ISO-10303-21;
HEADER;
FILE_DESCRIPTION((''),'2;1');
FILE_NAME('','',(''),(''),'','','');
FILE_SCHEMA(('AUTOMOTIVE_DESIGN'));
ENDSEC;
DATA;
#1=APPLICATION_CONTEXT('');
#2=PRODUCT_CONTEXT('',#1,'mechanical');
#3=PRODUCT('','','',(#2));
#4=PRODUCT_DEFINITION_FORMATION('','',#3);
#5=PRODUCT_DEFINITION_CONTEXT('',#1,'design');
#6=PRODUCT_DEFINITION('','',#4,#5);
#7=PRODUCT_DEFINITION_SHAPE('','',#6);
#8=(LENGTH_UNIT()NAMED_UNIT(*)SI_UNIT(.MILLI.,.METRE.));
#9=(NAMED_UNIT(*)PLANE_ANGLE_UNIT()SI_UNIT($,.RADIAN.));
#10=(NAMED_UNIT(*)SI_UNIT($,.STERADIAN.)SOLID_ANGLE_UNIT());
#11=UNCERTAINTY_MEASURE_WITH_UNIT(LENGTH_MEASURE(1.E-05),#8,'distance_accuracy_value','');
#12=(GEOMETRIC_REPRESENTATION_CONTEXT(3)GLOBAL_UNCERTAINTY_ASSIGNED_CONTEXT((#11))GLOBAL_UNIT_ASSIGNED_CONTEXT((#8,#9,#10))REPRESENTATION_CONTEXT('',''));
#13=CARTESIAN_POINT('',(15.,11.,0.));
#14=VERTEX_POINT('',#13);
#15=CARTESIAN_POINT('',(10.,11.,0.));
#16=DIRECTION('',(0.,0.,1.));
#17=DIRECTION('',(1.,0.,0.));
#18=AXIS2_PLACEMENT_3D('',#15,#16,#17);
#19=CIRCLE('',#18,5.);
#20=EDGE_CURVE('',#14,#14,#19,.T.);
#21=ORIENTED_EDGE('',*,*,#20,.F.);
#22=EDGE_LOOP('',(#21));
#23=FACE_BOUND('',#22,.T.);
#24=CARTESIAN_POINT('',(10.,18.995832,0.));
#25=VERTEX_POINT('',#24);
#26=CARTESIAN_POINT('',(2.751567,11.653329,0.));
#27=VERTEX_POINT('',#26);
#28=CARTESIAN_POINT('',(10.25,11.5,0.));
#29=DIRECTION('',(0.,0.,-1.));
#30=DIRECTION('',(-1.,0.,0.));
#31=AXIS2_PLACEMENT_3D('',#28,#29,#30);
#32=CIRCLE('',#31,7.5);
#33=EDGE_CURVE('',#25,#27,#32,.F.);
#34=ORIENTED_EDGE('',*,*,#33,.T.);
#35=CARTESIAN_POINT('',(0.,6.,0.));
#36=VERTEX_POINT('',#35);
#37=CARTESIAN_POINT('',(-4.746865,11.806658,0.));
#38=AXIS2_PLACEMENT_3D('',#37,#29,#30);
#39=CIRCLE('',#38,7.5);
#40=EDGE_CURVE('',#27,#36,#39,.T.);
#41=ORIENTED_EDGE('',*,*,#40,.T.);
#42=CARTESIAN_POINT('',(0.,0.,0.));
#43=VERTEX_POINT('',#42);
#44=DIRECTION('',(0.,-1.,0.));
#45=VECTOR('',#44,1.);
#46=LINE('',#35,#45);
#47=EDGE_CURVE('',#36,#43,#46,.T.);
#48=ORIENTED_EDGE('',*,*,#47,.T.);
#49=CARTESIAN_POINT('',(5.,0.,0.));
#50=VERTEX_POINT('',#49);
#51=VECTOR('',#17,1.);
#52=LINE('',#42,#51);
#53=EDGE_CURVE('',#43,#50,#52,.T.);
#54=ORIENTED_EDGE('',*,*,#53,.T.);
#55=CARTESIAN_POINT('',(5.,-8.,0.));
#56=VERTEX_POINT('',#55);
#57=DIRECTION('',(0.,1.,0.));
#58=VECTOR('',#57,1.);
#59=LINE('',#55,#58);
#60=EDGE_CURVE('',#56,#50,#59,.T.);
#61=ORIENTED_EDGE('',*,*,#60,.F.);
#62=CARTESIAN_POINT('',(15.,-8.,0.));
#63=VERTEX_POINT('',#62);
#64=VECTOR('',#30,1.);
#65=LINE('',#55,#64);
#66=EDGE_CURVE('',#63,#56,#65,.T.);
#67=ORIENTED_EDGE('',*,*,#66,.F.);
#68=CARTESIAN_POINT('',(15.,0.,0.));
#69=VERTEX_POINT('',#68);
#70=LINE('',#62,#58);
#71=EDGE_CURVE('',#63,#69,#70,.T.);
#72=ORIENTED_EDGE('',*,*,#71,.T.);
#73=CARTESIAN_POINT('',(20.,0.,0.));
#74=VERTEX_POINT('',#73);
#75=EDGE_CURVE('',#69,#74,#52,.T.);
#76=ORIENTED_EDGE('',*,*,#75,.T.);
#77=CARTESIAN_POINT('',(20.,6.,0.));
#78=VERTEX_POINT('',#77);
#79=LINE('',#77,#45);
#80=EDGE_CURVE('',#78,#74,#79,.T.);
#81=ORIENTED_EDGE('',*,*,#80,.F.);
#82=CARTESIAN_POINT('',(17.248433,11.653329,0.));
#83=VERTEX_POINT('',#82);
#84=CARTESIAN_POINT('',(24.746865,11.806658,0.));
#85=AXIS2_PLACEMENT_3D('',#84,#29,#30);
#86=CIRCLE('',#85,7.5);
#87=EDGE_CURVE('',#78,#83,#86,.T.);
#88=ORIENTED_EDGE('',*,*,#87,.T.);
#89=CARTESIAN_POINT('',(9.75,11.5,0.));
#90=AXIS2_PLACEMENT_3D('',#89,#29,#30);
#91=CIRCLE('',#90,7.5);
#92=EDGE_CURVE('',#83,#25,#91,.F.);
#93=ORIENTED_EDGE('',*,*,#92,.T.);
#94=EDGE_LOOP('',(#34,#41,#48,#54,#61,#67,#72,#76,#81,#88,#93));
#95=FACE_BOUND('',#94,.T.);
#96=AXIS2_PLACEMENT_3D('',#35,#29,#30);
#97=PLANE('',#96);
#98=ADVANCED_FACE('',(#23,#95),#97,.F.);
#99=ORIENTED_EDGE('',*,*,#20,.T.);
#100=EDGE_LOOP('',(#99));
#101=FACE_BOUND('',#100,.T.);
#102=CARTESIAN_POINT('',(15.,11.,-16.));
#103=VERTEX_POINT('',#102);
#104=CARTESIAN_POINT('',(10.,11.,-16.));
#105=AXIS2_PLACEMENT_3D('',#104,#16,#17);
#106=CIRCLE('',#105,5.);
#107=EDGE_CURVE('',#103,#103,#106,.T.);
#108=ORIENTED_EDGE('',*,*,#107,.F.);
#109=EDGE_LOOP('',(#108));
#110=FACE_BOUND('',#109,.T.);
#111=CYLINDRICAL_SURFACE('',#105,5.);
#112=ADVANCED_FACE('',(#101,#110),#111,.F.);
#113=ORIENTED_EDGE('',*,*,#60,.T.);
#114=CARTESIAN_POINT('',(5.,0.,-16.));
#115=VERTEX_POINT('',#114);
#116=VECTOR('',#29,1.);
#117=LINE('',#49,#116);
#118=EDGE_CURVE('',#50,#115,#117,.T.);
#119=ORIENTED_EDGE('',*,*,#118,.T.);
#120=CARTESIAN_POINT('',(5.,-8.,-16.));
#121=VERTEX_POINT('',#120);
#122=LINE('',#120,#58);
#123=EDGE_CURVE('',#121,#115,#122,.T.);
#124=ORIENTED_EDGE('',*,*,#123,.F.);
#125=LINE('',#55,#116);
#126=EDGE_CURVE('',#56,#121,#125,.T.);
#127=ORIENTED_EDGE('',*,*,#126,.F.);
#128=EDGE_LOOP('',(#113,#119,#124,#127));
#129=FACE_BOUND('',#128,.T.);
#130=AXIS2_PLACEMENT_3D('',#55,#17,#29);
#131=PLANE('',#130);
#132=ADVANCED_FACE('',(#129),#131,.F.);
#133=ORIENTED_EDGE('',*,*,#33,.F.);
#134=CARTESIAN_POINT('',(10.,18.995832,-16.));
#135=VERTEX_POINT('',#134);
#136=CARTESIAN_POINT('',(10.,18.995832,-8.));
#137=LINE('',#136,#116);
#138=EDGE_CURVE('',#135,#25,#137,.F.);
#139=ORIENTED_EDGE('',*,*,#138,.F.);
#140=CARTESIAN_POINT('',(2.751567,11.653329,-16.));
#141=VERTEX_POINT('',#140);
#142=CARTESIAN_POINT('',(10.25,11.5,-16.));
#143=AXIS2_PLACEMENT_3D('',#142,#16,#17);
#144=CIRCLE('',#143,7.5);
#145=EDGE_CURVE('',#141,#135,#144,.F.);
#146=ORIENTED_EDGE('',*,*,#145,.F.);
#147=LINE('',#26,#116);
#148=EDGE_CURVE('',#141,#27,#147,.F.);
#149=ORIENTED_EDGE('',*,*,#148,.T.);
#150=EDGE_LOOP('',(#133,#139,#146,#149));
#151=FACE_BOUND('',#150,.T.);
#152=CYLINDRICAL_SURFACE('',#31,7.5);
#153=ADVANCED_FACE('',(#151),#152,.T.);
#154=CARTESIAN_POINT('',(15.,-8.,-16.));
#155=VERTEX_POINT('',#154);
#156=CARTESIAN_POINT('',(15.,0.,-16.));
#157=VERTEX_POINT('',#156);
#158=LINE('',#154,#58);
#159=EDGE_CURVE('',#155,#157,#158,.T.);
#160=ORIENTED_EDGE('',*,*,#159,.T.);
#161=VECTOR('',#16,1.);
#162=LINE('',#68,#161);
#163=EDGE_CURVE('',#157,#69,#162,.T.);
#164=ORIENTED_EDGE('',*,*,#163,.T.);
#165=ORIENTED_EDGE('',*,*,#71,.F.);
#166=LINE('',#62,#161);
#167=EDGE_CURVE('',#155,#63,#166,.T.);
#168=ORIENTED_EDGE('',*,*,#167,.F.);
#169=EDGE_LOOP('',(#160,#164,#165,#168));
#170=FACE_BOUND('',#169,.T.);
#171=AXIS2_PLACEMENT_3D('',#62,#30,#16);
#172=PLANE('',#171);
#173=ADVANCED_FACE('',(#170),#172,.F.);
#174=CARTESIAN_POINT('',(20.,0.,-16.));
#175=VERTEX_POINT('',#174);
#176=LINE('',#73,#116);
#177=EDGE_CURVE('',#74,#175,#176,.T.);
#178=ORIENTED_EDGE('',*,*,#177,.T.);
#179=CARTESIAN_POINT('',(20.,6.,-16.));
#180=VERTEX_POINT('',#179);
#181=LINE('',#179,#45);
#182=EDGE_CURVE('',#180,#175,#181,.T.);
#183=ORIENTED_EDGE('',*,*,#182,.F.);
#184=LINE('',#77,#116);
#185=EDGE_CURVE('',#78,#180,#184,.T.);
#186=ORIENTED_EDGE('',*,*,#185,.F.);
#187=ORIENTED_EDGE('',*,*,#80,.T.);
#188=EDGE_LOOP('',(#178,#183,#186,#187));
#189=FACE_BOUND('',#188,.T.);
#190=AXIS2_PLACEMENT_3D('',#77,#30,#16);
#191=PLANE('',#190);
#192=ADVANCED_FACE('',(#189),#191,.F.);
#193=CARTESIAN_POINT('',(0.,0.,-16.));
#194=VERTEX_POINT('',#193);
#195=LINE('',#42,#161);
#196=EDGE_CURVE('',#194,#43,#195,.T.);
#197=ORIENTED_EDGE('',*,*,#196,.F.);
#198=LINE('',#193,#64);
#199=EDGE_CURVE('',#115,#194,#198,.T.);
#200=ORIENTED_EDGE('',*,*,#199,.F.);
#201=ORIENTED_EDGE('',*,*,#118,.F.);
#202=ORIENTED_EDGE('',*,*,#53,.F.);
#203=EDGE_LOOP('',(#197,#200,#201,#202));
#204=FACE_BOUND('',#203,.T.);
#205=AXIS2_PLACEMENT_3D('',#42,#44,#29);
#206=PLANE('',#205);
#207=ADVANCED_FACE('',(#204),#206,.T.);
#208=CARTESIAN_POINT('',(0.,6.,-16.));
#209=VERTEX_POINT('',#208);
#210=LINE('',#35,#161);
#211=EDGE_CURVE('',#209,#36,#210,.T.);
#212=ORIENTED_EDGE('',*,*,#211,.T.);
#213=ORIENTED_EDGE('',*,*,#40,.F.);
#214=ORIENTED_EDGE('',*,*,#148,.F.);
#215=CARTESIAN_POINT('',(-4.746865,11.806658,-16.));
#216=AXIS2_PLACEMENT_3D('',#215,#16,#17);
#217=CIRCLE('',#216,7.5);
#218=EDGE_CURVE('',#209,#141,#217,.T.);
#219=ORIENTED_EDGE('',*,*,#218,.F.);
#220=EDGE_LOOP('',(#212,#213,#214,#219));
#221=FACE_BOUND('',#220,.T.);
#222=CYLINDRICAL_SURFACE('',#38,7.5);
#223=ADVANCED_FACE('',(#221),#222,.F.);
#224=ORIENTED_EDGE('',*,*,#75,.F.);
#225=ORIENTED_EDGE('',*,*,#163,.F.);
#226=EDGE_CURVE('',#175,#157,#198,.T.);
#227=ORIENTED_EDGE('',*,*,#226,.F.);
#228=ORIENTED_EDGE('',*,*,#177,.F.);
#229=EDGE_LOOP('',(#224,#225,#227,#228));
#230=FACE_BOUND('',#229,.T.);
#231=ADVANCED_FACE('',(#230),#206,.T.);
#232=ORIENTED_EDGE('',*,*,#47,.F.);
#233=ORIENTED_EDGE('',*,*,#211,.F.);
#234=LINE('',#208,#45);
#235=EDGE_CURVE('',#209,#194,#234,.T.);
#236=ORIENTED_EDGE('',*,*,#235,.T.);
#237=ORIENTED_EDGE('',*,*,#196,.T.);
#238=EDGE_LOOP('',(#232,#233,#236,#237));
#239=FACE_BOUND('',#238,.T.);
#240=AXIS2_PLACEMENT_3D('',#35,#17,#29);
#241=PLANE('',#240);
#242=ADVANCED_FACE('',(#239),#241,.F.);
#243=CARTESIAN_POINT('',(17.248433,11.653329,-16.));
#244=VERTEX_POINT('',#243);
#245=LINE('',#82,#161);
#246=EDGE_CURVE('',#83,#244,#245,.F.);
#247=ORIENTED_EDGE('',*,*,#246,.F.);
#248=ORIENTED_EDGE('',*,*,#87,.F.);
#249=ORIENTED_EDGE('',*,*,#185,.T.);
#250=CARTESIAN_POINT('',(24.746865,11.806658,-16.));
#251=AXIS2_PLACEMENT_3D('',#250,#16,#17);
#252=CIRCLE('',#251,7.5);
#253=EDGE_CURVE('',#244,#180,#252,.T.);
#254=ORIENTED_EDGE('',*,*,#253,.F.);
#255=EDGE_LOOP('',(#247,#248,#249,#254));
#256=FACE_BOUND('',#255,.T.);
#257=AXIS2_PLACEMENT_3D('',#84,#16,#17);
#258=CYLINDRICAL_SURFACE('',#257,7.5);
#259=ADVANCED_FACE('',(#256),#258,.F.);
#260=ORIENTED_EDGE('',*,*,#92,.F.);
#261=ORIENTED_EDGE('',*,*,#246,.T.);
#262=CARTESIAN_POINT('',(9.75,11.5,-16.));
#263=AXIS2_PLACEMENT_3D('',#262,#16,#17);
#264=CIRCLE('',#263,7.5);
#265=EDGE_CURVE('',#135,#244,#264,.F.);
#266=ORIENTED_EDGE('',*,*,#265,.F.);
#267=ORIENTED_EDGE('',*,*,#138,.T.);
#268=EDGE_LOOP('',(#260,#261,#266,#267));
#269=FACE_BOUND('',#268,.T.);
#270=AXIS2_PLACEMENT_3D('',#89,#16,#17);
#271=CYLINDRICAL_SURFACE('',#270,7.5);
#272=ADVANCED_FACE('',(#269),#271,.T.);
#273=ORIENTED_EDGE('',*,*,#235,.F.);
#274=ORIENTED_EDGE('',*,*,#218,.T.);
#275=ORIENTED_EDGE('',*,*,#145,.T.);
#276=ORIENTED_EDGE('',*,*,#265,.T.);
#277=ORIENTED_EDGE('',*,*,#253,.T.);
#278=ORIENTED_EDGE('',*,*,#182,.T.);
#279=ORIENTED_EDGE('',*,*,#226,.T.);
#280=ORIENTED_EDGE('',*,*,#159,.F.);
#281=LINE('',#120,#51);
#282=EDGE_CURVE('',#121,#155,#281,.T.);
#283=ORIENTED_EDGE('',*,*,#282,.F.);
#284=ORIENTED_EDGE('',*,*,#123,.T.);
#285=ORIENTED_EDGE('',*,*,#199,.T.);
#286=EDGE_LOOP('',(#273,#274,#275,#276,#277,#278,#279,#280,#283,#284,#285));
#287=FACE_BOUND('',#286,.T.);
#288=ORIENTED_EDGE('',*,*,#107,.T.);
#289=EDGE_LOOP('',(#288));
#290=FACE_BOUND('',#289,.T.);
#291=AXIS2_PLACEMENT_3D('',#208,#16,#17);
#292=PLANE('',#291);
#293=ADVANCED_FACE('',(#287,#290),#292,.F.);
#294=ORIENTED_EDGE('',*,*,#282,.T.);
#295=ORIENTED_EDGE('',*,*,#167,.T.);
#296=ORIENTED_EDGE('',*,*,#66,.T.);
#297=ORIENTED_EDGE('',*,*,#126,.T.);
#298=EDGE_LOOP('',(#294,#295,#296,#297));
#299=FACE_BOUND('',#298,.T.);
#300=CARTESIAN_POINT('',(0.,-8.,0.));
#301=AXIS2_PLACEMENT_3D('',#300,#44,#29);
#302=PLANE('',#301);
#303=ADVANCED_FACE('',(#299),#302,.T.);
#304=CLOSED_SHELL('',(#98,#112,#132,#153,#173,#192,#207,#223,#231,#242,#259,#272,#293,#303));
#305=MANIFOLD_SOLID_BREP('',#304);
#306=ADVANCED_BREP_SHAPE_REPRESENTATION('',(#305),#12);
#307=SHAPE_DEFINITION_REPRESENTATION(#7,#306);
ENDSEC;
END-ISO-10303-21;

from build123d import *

# Parameters (mm, degrees)
SKETCH6_W           = 20
SKETCH6_H           = 16
BOSS_EXTRUDE5_DEPTH = 6
SKETCH7_W           = 10
SKETCH7_H           = 16
BOSS_EXTRUDE6_DEPTH = 8
SKETCH8_W           = 14.5
SKETCH8_H           = 16
BOSS_EXTRUDE7_DEPTH = 13
SKETCH9_R           = 5
CUT_EXTRUDE1_DEPTH  = 32.890437438
FILLET1_R           = 7.5
FILLET2_R           = 7.5


with BuildPart() as part:
    # Sketch6 → Boss-Extrude5 (new body)
    with BuildSketch(Plane(origin=(0, 0, 0), x_dir=(1, 0, 0), z_dir=(0, 1, 0))):
        with Locations((10, 8)):
            Rectangle(SKETCH6_W, SKETCH6_H)
    extrude(amount=BOSS_EXTRUDE5_DEPTH)

    # Sketch7 → Boss-Extrude6 (add)
    with BuildSketch(Plane.XZ):
        with Locations((10, -8)):
            Rectangle(SKETCH7_W, SKETCH7_H)
    extrude(amount=BOSS_EXTRUDE6_DEPTH)

    # Sketch8 → Boss-Extrude7 (add)
    with BuildSketch(Plane(origin=(0, 6, 0), x_dir=(1, 0, 0), z_dir=(0, 1, 0))):
        with Locations((10, 8)):
            Rectangle(SKETCH8_W, SKETCH8_H)
    extrude(amount=BOSS_EXTRUDE7_DEPTH)

    # Sketch9 → Cut-Extrude1 (cut, through all)
    with BuildSketch(Plane.XY):
        with Locations((10, 11)):
            Circle(SKETCH9_R)
    extrude(amount=-CUT_EXTRUDE1_DEPTH, mode=Mode.SUBTRACT)

    # Fillet1
    # the kernel refuses this fillet: 7.5 mm, written as the material it takes off along each edge
    with BuildSketch(Plane(origin=(17.25, 19, -34.75), x_dir=(-1, 0, 0), z_dir=(0, 0, 1))) as fillet1_piece_1:
        with BuildLine():
            CenterArc((FILLET1_R, FILLET1_R), FILLET1_R, 180, 90)
            Line((0, FILLET1_R), (0, 0))
            Line((0, 0), (FILLET1_R, 0))
        make_face()
    extrude(amount=53.5, mode=Mode.SUBTRACT)
    with BuildSketch(Plane(origin=(2.75, 19, 18.75), x_dir=(0, -1, 0), z_dir=(0, 0, -1))) as fillet1_piece_2:
        with BuildLine():
            CenterArc((FILLET1_R, -FILLET1_R), FILLET1_R, 90, 90)
            Line((0, -FILLET1_R), (0, 0))
            Line((0, 0), (FILLET1_R, 0))
        make_face()
    extrude(amount=53.5, mode=Mode.SUBTRACT)

    # Fillet2
    # the kernel refuses this fillet: 7.5 mm, written as the material it adds along each edge
    with BuildSketch(Plane(origin=(17.25, 6, -16), x_dir=(1, 0, 0), z_dir=(0, 0, 1))) as fillet2_piece_1:
        with BuildLine():
            CenterArc((7.496865043, 5.806657581), FILLET2_R, 181.171427285, 49.563032728)
            Line((-0.001567478, 5.65332879), (-0.75141073, 5.637995911))
            ThreePointArc((-0.75141073, 5.637995911), (-0.75, 5.5), (-0.75, 0))
            Line((-0.75, 0), (0, -0.75))
            ThreePointArc((0, -0.75), (1.375, -0.75), (2.275313496, -0.580665758))
            Line((2.275313496, -0.580665758), (2.75, 0))
        make_face()
    extrude(amount=16)
    with BuildSketch(Plane(origin=(2.75, 6, 0), x_dir=(0.00027726642617420565, 0.9999999615616638, 0), z_dir=(0, 0, -1))) as fillet2_piece_2:
        with BuildLine():
            CenterArc((5.804578729, -7.498474746), FILLET2_R, 91.155541089, 49.563032728)
            Line((-0.000762483, -2.749999894), (-0.581296604, -2.275152409))
            ThreePointArc((-0.581296604, -2.275152409), (-0.750381213, -1.374791997), (-0.749999971, 0.00020795))
            Line((-0.749999971, 0.00020795), (0.00020795, 0.749999971))
            ThreePointArc((0.00020795, 0.749999971), (5.500207738, 0.748475006), (5.638204036, 0.749847475))
            Line((5.638204036, 0.749847475), (5.653329008, 0))
        make_face()
    extrude(amount=16)


solid = part.part
